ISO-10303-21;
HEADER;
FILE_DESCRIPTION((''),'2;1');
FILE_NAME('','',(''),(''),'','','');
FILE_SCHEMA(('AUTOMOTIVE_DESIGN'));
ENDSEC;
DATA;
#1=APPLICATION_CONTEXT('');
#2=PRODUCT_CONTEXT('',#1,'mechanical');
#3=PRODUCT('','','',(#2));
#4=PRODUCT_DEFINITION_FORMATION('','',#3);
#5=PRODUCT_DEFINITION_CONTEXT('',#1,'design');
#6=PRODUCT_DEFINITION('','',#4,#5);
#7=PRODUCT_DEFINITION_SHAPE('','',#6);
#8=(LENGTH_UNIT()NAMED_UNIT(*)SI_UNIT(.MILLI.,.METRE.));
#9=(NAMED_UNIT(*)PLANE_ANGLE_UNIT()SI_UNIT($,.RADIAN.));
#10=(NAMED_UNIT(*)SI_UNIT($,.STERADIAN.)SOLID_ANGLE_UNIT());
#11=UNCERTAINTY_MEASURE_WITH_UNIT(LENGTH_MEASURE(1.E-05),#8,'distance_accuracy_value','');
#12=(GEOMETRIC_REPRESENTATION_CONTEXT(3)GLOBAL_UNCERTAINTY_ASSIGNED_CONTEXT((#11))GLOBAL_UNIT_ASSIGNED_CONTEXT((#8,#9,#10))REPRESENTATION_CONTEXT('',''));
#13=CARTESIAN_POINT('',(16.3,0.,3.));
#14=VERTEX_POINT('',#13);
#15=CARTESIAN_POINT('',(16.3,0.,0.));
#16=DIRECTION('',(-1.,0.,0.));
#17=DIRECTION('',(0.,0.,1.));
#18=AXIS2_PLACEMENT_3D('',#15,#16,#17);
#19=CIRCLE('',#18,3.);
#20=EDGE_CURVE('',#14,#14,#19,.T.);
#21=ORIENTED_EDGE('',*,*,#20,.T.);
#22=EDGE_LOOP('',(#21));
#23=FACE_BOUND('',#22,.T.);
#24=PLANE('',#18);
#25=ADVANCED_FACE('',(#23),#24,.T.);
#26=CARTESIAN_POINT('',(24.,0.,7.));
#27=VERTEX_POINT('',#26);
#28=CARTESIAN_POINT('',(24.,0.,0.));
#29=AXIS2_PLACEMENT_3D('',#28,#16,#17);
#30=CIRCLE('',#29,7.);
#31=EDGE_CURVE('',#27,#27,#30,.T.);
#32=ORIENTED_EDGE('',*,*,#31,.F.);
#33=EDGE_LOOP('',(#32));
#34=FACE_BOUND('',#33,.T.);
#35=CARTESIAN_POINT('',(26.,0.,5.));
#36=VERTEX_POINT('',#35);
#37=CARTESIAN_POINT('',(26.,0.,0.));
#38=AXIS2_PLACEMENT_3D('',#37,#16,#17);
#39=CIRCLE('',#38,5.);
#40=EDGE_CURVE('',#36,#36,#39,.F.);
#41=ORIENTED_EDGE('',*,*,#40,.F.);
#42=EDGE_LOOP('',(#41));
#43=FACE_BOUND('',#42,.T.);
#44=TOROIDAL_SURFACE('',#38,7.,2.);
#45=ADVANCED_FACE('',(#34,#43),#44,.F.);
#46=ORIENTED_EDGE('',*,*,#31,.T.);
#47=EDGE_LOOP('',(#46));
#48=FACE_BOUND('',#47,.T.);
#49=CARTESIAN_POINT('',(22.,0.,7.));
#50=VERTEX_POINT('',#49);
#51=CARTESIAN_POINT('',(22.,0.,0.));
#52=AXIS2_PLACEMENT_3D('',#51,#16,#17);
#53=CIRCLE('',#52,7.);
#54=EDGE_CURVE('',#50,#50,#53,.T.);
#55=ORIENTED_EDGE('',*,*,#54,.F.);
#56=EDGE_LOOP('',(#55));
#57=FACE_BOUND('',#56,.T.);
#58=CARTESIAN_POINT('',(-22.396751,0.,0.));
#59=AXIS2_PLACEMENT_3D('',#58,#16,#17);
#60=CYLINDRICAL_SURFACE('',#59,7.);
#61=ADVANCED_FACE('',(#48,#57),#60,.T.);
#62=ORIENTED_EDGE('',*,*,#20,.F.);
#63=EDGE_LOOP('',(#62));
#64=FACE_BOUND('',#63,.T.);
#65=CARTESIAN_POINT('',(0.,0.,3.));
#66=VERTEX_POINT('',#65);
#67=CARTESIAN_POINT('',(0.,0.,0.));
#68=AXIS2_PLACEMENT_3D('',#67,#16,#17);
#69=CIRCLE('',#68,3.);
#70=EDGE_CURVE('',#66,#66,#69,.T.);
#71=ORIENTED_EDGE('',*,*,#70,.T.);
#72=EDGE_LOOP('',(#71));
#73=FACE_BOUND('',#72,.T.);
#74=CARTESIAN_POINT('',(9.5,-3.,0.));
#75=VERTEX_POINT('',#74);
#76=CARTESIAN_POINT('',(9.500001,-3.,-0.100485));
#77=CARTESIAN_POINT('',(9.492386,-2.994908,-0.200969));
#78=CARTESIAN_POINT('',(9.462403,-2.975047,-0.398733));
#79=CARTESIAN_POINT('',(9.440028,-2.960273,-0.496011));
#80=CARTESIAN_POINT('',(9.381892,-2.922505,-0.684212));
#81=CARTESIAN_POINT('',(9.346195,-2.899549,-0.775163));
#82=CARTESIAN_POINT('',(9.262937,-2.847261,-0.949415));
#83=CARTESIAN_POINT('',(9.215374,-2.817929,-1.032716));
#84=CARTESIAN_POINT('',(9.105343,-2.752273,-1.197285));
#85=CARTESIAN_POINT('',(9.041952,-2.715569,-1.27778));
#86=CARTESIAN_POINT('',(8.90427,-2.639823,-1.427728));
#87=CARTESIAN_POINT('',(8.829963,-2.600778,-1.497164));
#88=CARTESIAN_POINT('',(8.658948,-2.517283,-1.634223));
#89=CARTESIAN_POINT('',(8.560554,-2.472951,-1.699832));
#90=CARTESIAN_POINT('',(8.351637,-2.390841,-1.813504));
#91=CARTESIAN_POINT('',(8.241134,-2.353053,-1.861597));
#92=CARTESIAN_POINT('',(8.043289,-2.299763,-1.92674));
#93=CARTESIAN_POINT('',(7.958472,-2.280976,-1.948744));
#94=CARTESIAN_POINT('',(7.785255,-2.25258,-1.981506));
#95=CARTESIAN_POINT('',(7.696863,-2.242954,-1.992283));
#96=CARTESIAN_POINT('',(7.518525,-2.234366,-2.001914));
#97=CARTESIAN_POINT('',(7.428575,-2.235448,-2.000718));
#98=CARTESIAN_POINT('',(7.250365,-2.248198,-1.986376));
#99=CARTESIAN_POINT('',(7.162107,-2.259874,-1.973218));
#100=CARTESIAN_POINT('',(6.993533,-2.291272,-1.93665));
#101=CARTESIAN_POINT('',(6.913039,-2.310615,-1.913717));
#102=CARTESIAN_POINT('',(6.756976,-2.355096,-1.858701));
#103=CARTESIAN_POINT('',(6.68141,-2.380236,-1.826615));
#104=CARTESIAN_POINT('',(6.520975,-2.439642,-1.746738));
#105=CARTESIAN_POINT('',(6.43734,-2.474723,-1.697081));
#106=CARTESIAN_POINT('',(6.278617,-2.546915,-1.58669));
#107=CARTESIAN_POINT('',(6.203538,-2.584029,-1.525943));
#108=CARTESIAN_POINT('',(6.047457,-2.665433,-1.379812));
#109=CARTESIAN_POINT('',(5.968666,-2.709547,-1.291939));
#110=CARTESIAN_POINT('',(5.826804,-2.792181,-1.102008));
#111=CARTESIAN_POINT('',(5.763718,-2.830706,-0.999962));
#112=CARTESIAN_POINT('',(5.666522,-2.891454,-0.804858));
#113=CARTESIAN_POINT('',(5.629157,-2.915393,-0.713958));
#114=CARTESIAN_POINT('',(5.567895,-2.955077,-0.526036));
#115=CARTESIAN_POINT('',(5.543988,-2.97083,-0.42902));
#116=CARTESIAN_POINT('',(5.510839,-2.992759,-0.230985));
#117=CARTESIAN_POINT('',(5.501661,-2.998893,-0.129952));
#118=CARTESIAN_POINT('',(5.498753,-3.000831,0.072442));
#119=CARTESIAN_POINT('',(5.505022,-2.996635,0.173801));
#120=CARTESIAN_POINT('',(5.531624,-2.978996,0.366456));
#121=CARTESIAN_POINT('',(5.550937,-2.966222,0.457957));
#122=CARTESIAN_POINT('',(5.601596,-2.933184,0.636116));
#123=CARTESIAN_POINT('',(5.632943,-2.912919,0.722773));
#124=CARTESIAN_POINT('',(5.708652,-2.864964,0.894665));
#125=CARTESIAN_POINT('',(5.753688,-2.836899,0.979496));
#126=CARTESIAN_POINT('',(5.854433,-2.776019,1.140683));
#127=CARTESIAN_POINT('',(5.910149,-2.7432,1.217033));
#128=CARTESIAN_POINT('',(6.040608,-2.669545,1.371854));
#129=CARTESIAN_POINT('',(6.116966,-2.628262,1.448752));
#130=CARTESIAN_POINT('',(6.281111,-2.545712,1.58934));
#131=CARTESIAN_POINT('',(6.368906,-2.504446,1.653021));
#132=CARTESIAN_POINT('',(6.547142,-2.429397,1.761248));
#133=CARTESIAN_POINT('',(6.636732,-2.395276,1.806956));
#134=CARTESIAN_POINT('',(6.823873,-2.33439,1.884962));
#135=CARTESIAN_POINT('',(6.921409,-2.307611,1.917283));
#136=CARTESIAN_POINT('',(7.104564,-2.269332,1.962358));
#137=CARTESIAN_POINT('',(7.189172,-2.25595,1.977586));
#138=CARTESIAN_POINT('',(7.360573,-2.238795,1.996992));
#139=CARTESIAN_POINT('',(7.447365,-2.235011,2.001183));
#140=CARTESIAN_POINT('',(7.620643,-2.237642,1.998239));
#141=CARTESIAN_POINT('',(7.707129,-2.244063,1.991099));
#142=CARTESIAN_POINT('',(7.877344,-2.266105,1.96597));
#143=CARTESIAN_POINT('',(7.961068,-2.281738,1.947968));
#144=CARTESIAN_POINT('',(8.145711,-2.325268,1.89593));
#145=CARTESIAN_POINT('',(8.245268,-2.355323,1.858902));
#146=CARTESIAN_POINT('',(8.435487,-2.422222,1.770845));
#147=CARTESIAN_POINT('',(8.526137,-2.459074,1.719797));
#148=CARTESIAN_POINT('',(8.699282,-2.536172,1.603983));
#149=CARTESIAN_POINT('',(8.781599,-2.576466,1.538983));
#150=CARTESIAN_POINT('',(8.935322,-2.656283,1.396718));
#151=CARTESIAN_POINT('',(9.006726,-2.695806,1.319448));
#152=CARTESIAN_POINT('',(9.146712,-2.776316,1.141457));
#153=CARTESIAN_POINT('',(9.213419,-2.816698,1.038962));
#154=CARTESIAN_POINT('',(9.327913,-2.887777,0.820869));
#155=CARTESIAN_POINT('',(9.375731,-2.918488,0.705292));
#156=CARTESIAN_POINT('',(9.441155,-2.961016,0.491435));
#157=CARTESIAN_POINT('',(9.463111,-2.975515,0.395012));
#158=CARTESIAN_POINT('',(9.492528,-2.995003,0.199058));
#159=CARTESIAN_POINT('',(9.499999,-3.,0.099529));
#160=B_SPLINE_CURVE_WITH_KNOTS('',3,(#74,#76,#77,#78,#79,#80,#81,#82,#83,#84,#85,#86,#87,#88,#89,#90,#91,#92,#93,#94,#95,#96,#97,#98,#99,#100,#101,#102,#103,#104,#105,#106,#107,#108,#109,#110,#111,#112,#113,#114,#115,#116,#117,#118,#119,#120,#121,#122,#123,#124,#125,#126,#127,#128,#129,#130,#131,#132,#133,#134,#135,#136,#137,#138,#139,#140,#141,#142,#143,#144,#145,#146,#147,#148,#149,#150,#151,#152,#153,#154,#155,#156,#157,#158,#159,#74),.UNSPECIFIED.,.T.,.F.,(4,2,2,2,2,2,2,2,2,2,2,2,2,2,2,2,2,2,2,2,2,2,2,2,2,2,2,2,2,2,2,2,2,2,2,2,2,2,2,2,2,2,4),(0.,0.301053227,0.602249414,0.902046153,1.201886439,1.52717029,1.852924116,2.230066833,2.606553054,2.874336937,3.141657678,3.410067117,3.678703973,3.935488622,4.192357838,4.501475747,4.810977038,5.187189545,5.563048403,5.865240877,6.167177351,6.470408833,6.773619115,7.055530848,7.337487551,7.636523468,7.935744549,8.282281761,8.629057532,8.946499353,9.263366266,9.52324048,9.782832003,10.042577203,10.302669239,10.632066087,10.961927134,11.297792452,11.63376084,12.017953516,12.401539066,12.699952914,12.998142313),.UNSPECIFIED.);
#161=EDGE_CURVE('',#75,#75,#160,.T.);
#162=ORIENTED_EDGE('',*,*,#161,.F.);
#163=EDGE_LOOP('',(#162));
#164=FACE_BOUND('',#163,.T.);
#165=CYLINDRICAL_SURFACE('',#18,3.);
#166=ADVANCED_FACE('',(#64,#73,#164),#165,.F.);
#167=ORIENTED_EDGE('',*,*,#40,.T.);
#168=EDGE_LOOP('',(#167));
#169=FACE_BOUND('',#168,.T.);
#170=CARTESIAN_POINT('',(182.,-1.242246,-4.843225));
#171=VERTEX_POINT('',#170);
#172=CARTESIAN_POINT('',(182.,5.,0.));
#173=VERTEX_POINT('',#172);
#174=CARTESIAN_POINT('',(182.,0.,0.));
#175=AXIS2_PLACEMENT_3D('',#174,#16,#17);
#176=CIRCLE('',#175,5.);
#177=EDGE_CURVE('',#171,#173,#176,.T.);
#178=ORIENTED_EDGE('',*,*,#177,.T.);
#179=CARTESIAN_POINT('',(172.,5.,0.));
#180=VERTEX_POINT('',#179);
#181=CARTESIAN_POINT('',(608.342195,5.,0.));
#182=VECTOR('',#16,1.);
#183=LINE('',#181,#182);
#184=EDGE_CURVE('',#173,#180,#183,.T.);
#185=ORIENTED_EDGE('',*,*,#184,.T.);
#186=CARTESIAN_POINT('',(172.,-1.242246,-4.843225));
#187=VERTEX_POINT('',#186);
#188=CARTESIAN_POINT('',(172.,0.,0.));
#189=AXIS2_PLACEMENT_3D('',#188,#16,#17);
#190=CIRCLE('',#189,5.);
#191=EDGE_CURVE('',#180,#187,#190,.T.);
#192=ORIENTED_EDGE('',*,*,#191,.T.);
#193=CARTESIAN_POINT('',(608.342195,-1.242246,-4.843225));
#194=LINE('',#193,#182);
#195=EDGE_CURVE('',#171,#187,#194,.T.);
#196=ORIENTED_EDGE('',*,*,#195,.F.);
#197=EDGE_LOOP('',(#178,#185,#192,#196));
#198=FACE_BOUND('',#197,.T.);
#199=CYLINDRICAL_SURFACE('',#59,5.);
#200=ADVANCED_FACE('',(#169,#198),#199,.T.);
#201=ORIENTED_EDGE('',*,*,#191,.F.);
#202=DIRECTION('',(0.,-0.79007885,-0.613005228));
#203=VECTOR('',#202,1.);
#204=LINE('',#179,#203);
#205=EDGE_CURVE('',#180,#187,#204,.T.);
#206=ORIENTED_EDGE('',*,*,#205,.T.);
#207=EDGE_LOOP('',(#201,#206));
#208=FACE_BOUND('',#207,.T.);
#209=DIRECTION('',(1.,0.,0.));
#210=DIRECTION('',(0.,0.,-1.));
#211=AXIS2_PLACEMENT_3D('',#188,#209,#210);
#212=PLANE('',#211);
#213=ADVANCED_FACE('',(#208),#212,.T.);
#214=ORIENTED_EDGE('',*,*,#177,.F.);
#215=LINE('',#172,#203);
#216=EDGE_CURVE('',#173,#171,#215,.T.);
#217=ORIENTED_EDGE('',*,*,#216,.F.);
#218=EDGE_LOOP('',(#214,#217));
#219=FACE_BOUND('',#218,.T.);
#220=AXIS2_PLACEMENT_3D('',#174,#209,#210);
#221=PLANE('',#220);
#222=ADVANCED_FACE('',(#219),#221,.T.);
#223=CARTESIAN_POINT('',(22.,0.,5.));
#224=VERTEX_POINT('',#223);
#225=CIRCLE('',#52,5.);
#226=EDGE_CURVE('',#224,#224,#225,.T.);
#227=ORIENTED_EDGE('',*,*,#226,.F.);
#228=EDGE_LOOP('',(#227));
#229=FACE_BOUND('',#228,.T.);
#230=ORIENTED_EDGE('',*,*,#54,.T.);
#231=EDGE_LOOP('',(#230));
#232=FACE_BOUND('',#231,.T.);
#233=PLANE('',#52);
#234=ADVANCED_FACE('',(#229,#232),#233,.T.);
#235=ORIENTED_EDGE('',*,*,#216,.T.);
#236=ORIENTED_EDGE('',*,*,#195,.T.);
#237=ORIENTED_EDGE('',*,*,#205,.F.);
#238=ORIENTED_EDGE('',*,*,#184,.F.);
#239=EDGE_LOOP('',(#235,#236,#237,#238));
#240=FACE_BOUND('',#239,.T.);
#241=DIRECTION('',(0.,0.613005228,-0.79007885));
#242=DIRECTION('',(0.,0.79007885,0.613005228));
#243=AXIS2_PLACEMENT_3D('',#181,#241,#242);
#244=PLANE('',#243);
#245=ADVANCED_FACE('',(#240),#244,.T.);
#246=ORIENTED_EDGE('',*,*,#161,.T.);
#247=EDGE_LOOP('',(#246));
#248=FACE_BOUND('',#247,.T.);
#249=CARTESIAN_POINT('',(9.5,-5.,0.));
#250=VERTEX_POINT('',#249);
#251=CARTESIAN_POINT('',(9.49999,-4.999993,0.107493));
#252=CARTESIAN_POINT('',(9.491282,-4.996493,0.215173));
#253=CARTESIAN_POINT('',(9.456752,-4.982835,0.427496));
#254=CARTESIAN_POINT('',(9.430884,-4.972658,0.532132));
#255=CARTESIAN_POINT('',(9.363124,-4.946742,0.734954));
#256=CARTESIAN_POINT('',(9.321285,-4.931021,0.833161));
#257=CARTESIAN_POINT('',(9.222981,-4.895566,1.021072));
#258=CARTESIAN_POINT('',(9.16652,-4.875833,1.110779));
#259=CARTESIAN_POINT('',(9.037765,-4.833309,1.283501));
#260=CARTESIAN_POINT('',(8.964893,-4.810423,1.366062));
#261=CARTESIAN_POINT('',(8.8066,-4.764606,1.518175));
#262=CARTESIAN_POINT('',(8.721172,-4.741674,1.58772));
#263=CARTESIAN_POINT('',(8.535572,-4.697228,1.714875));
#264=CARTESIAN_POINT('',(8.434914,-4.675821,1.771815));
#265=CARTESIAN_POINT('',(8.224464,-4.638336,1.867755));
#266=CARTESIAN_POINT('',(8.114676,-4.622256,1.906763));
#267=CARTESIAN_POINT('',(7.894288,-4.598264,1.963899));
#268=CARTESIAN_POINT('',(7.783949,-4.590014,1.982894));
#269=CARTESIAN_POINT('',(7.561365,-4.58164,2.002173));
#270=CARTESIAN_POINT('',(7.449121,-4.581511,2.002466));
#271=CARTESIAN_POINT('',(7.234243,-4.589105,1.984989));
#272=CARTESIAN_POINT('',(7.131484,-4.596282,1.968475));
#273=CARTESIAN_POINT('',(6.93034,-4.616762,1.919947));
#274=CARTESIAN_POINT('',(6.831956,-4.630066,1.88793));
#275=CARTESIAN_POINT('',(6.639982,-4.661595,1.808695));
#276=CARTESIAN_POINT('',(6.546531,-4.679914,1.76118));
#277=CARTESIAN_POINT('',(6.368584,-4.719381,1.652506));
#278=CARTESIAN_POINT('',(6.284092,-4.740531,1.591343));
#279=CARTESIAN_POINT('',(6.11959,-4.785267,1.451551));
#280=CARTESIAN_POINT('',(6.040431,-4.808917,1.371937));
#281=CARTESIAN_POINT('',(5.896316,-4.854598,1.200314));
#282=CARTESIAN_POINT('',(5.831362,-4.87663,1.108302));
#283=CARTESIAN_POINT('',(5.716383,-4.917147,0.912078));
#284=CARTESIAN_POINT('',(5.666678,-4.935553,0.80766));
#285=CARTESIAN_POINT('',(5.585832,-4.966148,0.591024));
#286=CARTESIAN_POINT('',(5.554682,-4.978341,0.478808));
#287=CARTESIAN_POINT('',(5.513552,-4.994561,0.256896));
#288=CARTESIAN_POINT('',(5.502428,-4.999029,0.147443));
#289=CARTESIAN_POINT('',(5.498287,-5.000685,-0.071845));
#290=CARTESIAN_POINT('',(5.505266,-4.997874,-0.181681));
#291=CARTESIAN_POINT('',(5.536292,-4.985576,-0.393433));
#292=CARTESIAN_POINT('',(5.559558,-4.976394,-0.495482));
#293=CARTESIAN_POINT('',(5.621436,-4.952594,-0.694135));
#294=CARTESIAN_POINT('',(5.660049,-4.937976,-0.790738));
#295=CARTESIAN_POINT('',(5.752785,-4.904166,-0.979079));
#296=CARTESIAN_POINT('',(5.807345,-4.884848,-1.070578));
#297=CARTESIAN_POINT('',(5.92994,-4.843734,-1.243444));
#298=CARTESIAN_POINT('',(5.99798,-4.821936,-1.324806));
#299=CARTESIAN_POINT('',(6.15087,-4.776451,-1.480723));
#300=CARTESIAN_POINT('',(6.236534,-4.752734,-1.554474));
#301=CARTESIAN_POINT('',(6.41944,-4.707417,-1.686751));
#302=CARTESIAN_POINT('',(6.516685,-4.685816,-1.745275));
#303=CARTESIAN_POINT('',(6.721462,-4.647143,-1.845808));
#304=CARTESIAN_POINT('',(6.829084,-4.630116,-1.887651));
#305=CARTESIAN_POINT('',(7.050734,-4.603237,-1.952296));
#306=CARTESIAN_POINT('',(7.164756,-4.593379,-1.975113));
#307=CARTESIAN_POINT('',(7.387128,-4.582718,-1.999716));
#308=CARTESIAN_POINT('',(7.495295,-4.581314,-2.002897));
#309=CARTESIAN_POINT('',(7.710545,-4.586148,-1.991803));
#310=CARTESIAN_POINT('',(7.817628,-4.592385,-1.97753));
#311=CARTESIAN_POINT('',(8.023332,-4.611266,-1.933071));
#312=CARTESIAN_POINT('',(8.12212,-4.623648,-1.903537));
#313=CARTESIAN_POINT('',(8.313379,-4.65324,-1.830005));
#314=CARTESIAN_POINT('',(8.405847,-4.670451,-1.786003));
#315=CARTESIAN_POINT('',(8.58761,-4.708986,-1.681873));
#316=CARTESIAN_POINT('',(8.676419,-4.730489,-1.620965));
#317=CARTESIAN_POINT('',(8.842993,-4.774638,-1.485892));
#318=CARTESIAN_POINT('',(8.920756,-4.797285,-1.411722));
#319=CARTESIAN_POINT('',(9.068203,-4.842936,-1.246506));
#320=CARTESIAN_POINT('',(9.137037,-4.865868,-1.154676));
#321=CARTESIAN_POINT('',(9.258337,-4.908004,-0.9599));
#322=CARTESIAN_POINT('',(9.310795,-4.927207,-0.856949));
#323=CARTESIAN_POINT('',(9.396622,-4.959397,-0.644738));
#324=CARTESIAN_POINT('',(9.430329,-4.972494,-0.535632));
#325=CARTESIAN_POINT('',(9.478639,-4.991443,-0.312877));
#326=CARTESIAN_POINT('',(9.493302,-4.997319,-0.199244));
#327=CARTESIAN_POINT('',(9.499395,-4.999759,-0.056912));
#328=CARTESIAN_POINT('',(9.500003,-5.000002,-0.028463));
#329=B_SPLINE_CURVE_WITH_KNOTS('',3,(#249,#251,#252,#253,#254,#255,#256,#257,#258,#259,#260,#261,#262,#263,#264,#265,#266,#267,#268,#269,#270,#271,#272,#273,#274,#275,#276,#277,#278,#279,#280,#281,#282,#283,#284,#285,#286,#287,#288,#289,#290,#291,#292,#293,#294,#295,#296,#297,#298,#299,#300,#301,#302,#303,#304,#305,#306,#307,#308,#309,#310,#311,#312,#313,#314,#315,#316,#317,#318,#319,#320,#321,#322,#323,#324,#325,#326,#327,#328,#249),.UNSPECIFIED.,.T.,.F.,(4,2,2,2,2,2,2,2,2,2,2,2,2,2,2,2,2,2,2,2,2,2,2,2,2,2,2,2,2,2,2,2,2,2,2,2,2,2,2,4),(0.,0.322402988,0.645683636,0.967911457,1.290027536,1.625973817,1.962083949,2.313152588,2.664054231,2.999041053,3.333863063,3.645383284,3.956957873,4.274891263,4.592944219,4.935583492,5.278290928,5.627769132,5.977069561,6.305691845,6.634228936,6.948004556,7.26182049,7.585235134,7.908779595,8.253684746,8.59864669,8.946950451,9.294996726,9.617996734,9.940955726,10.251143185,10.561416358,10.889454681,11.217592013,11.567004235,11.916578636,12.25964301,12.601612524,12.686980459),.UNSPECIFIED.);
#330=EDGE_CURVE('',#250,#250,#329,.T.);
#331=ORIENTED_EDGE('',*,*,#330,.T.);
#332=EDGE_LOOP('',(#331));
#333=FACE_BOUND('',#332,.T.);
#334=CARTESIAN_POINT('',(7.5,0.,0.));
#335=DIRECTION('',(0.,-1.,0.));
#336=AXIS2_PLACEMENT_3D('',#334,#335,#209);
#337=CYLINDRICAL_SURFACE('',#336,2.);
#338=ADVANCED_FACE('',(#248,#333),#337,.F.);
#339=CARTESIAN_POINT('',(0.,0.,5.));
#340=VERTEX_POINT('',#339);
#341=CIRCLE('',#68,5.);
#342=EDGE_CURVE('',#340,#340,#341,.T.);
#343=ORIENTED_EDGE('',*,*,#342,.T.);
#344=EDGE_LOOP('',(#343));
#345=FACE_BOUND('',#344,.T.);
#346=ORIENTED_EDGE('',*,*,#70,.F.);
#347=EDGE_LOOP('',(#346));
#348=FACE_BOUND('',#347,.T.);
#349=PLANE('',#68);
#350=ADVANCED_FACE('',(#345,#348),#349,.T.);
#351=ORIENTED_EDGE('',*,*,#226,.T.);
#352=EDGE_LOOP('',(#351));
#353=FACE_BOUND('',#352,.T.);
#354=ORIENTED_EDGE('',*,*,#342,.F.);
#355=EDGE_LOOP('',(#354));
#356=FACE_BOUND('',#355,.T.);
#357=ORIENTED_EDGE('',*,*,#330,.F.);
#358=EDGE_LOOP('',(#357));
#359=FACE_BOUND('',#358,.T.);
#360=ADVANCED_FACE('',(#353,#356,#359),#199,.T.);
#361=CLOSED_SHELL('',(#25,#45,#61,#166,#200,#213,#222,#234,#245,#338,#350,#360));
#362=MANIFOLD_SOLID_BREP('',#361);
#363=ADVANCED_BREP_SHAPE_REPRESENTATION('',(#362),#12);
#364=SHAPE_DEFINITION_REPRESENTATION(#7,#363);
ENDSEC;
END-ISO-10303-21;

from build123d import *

# Parameters (mm, degrees)
ESQUISSE1_W                  = 36
ESQUISSE1_H                  = 5
ESQUISSE1_W_2                = 2
ESQUISSE1_H_2                = 2
CONG_1_R                     = 2
ESQUISSE6_R                  = 2
ENL_V_MAT_EXTRU_2_DEPTH      = 5
ESQUISSE7_R                  = 3
ENL_V_MAT_EXTRU_3_DEPTH      = 16.3
ENL_V_MAT_EXTRU_4_DEPTH      = 183.269032028
ENL_V_MAT_EXTRU_4_DEPTH_BACK = 10


with BuildPart() as part:
    # Esquisse1 → Révolution1 (revolve)
    with BuildSketch(Plane.XY, mode=Mode.PRIVATE) as r_volution1_sk:
        Polygon((0, 5), (0, 0), (146, 0), (146, 5), (24, 5), (22, 5), align=None)
        with Locations((164, 2.5)):
            Rectangle(ESQUISSE1_W, ESQUISSE1_H)
        with Locations((23, 6)):
            Rectangle(ESQUISSE1_W_2, ESQUISSE1_H_2)
    revolve(r_volution1_sk.sketch.rotate(Axis((-22.396751432, 0, 0), (1, 0, 0)), 90), axis=Axis((-22.396751432, 0, 0), (1, 0, 0)))

    # Congé1
    cong_1_edges = [part.edges().sort_by_distance(p)[0] for p in [
        (24, 0, -5),
    ]]
    fillet(cong_1_edges, radius=CONG_1_R - 0.0001)  # a hair under: the kernel refuses the full size

    # Esquisse6 → Enlèv. mat.-Extru.2 (cut)
    with BuildSketch(Plane(origin=(0, -5, 0), x_dir=(-1, 0, 0), z_dir=(0, -1, 0))):
        with Locations(Location((-7.5, 0, 0), (0, 0, 180))):
            Circle(ESQUISSE6_R)
    extrude(amount=-ENL_V_MAT_EXTRU_2_DEPTH, mode=Mode.SUBTRACT)

    # Esquisse7 → Enlèv. mat.-Extru.3 (cut)
    with BuildSketch(Plane.ZY):
        Circle(ESQUISSE7_R)
    extrude(amount=-ENL_V_MAT_EXTRU_3_DEPTH, mode=Mode.SUBTRACT)

    # Esquisse8 → Enlèv. mat.-Extru.4 (cut, two sides: drawn at the far end of the back side and taken through both)
    with BuildSketch(Plane(origin=(182, 0, 0), x_dir=(0, 0, -1), z_dir=(1, 0, 0)).offset(-ENL_V_MAT_EXTRU_4_DEPTH_BACK)):
        Polygon((-23.820180397, 35.700913916), (0, 5), (4.843224662, -1.2422459), (28.663405059, -31.943159816), (90.065232892, 15.697200979), (37.581647435, 83.341274711), align=None)
    extrude(amount=ENL_V_MAT_EXTRU_4_DEPTH + ENL_V_MAT_EXTRU_4_DEPTH_BACK, mode=Mode.SUBTRACT)


solid = part.part
